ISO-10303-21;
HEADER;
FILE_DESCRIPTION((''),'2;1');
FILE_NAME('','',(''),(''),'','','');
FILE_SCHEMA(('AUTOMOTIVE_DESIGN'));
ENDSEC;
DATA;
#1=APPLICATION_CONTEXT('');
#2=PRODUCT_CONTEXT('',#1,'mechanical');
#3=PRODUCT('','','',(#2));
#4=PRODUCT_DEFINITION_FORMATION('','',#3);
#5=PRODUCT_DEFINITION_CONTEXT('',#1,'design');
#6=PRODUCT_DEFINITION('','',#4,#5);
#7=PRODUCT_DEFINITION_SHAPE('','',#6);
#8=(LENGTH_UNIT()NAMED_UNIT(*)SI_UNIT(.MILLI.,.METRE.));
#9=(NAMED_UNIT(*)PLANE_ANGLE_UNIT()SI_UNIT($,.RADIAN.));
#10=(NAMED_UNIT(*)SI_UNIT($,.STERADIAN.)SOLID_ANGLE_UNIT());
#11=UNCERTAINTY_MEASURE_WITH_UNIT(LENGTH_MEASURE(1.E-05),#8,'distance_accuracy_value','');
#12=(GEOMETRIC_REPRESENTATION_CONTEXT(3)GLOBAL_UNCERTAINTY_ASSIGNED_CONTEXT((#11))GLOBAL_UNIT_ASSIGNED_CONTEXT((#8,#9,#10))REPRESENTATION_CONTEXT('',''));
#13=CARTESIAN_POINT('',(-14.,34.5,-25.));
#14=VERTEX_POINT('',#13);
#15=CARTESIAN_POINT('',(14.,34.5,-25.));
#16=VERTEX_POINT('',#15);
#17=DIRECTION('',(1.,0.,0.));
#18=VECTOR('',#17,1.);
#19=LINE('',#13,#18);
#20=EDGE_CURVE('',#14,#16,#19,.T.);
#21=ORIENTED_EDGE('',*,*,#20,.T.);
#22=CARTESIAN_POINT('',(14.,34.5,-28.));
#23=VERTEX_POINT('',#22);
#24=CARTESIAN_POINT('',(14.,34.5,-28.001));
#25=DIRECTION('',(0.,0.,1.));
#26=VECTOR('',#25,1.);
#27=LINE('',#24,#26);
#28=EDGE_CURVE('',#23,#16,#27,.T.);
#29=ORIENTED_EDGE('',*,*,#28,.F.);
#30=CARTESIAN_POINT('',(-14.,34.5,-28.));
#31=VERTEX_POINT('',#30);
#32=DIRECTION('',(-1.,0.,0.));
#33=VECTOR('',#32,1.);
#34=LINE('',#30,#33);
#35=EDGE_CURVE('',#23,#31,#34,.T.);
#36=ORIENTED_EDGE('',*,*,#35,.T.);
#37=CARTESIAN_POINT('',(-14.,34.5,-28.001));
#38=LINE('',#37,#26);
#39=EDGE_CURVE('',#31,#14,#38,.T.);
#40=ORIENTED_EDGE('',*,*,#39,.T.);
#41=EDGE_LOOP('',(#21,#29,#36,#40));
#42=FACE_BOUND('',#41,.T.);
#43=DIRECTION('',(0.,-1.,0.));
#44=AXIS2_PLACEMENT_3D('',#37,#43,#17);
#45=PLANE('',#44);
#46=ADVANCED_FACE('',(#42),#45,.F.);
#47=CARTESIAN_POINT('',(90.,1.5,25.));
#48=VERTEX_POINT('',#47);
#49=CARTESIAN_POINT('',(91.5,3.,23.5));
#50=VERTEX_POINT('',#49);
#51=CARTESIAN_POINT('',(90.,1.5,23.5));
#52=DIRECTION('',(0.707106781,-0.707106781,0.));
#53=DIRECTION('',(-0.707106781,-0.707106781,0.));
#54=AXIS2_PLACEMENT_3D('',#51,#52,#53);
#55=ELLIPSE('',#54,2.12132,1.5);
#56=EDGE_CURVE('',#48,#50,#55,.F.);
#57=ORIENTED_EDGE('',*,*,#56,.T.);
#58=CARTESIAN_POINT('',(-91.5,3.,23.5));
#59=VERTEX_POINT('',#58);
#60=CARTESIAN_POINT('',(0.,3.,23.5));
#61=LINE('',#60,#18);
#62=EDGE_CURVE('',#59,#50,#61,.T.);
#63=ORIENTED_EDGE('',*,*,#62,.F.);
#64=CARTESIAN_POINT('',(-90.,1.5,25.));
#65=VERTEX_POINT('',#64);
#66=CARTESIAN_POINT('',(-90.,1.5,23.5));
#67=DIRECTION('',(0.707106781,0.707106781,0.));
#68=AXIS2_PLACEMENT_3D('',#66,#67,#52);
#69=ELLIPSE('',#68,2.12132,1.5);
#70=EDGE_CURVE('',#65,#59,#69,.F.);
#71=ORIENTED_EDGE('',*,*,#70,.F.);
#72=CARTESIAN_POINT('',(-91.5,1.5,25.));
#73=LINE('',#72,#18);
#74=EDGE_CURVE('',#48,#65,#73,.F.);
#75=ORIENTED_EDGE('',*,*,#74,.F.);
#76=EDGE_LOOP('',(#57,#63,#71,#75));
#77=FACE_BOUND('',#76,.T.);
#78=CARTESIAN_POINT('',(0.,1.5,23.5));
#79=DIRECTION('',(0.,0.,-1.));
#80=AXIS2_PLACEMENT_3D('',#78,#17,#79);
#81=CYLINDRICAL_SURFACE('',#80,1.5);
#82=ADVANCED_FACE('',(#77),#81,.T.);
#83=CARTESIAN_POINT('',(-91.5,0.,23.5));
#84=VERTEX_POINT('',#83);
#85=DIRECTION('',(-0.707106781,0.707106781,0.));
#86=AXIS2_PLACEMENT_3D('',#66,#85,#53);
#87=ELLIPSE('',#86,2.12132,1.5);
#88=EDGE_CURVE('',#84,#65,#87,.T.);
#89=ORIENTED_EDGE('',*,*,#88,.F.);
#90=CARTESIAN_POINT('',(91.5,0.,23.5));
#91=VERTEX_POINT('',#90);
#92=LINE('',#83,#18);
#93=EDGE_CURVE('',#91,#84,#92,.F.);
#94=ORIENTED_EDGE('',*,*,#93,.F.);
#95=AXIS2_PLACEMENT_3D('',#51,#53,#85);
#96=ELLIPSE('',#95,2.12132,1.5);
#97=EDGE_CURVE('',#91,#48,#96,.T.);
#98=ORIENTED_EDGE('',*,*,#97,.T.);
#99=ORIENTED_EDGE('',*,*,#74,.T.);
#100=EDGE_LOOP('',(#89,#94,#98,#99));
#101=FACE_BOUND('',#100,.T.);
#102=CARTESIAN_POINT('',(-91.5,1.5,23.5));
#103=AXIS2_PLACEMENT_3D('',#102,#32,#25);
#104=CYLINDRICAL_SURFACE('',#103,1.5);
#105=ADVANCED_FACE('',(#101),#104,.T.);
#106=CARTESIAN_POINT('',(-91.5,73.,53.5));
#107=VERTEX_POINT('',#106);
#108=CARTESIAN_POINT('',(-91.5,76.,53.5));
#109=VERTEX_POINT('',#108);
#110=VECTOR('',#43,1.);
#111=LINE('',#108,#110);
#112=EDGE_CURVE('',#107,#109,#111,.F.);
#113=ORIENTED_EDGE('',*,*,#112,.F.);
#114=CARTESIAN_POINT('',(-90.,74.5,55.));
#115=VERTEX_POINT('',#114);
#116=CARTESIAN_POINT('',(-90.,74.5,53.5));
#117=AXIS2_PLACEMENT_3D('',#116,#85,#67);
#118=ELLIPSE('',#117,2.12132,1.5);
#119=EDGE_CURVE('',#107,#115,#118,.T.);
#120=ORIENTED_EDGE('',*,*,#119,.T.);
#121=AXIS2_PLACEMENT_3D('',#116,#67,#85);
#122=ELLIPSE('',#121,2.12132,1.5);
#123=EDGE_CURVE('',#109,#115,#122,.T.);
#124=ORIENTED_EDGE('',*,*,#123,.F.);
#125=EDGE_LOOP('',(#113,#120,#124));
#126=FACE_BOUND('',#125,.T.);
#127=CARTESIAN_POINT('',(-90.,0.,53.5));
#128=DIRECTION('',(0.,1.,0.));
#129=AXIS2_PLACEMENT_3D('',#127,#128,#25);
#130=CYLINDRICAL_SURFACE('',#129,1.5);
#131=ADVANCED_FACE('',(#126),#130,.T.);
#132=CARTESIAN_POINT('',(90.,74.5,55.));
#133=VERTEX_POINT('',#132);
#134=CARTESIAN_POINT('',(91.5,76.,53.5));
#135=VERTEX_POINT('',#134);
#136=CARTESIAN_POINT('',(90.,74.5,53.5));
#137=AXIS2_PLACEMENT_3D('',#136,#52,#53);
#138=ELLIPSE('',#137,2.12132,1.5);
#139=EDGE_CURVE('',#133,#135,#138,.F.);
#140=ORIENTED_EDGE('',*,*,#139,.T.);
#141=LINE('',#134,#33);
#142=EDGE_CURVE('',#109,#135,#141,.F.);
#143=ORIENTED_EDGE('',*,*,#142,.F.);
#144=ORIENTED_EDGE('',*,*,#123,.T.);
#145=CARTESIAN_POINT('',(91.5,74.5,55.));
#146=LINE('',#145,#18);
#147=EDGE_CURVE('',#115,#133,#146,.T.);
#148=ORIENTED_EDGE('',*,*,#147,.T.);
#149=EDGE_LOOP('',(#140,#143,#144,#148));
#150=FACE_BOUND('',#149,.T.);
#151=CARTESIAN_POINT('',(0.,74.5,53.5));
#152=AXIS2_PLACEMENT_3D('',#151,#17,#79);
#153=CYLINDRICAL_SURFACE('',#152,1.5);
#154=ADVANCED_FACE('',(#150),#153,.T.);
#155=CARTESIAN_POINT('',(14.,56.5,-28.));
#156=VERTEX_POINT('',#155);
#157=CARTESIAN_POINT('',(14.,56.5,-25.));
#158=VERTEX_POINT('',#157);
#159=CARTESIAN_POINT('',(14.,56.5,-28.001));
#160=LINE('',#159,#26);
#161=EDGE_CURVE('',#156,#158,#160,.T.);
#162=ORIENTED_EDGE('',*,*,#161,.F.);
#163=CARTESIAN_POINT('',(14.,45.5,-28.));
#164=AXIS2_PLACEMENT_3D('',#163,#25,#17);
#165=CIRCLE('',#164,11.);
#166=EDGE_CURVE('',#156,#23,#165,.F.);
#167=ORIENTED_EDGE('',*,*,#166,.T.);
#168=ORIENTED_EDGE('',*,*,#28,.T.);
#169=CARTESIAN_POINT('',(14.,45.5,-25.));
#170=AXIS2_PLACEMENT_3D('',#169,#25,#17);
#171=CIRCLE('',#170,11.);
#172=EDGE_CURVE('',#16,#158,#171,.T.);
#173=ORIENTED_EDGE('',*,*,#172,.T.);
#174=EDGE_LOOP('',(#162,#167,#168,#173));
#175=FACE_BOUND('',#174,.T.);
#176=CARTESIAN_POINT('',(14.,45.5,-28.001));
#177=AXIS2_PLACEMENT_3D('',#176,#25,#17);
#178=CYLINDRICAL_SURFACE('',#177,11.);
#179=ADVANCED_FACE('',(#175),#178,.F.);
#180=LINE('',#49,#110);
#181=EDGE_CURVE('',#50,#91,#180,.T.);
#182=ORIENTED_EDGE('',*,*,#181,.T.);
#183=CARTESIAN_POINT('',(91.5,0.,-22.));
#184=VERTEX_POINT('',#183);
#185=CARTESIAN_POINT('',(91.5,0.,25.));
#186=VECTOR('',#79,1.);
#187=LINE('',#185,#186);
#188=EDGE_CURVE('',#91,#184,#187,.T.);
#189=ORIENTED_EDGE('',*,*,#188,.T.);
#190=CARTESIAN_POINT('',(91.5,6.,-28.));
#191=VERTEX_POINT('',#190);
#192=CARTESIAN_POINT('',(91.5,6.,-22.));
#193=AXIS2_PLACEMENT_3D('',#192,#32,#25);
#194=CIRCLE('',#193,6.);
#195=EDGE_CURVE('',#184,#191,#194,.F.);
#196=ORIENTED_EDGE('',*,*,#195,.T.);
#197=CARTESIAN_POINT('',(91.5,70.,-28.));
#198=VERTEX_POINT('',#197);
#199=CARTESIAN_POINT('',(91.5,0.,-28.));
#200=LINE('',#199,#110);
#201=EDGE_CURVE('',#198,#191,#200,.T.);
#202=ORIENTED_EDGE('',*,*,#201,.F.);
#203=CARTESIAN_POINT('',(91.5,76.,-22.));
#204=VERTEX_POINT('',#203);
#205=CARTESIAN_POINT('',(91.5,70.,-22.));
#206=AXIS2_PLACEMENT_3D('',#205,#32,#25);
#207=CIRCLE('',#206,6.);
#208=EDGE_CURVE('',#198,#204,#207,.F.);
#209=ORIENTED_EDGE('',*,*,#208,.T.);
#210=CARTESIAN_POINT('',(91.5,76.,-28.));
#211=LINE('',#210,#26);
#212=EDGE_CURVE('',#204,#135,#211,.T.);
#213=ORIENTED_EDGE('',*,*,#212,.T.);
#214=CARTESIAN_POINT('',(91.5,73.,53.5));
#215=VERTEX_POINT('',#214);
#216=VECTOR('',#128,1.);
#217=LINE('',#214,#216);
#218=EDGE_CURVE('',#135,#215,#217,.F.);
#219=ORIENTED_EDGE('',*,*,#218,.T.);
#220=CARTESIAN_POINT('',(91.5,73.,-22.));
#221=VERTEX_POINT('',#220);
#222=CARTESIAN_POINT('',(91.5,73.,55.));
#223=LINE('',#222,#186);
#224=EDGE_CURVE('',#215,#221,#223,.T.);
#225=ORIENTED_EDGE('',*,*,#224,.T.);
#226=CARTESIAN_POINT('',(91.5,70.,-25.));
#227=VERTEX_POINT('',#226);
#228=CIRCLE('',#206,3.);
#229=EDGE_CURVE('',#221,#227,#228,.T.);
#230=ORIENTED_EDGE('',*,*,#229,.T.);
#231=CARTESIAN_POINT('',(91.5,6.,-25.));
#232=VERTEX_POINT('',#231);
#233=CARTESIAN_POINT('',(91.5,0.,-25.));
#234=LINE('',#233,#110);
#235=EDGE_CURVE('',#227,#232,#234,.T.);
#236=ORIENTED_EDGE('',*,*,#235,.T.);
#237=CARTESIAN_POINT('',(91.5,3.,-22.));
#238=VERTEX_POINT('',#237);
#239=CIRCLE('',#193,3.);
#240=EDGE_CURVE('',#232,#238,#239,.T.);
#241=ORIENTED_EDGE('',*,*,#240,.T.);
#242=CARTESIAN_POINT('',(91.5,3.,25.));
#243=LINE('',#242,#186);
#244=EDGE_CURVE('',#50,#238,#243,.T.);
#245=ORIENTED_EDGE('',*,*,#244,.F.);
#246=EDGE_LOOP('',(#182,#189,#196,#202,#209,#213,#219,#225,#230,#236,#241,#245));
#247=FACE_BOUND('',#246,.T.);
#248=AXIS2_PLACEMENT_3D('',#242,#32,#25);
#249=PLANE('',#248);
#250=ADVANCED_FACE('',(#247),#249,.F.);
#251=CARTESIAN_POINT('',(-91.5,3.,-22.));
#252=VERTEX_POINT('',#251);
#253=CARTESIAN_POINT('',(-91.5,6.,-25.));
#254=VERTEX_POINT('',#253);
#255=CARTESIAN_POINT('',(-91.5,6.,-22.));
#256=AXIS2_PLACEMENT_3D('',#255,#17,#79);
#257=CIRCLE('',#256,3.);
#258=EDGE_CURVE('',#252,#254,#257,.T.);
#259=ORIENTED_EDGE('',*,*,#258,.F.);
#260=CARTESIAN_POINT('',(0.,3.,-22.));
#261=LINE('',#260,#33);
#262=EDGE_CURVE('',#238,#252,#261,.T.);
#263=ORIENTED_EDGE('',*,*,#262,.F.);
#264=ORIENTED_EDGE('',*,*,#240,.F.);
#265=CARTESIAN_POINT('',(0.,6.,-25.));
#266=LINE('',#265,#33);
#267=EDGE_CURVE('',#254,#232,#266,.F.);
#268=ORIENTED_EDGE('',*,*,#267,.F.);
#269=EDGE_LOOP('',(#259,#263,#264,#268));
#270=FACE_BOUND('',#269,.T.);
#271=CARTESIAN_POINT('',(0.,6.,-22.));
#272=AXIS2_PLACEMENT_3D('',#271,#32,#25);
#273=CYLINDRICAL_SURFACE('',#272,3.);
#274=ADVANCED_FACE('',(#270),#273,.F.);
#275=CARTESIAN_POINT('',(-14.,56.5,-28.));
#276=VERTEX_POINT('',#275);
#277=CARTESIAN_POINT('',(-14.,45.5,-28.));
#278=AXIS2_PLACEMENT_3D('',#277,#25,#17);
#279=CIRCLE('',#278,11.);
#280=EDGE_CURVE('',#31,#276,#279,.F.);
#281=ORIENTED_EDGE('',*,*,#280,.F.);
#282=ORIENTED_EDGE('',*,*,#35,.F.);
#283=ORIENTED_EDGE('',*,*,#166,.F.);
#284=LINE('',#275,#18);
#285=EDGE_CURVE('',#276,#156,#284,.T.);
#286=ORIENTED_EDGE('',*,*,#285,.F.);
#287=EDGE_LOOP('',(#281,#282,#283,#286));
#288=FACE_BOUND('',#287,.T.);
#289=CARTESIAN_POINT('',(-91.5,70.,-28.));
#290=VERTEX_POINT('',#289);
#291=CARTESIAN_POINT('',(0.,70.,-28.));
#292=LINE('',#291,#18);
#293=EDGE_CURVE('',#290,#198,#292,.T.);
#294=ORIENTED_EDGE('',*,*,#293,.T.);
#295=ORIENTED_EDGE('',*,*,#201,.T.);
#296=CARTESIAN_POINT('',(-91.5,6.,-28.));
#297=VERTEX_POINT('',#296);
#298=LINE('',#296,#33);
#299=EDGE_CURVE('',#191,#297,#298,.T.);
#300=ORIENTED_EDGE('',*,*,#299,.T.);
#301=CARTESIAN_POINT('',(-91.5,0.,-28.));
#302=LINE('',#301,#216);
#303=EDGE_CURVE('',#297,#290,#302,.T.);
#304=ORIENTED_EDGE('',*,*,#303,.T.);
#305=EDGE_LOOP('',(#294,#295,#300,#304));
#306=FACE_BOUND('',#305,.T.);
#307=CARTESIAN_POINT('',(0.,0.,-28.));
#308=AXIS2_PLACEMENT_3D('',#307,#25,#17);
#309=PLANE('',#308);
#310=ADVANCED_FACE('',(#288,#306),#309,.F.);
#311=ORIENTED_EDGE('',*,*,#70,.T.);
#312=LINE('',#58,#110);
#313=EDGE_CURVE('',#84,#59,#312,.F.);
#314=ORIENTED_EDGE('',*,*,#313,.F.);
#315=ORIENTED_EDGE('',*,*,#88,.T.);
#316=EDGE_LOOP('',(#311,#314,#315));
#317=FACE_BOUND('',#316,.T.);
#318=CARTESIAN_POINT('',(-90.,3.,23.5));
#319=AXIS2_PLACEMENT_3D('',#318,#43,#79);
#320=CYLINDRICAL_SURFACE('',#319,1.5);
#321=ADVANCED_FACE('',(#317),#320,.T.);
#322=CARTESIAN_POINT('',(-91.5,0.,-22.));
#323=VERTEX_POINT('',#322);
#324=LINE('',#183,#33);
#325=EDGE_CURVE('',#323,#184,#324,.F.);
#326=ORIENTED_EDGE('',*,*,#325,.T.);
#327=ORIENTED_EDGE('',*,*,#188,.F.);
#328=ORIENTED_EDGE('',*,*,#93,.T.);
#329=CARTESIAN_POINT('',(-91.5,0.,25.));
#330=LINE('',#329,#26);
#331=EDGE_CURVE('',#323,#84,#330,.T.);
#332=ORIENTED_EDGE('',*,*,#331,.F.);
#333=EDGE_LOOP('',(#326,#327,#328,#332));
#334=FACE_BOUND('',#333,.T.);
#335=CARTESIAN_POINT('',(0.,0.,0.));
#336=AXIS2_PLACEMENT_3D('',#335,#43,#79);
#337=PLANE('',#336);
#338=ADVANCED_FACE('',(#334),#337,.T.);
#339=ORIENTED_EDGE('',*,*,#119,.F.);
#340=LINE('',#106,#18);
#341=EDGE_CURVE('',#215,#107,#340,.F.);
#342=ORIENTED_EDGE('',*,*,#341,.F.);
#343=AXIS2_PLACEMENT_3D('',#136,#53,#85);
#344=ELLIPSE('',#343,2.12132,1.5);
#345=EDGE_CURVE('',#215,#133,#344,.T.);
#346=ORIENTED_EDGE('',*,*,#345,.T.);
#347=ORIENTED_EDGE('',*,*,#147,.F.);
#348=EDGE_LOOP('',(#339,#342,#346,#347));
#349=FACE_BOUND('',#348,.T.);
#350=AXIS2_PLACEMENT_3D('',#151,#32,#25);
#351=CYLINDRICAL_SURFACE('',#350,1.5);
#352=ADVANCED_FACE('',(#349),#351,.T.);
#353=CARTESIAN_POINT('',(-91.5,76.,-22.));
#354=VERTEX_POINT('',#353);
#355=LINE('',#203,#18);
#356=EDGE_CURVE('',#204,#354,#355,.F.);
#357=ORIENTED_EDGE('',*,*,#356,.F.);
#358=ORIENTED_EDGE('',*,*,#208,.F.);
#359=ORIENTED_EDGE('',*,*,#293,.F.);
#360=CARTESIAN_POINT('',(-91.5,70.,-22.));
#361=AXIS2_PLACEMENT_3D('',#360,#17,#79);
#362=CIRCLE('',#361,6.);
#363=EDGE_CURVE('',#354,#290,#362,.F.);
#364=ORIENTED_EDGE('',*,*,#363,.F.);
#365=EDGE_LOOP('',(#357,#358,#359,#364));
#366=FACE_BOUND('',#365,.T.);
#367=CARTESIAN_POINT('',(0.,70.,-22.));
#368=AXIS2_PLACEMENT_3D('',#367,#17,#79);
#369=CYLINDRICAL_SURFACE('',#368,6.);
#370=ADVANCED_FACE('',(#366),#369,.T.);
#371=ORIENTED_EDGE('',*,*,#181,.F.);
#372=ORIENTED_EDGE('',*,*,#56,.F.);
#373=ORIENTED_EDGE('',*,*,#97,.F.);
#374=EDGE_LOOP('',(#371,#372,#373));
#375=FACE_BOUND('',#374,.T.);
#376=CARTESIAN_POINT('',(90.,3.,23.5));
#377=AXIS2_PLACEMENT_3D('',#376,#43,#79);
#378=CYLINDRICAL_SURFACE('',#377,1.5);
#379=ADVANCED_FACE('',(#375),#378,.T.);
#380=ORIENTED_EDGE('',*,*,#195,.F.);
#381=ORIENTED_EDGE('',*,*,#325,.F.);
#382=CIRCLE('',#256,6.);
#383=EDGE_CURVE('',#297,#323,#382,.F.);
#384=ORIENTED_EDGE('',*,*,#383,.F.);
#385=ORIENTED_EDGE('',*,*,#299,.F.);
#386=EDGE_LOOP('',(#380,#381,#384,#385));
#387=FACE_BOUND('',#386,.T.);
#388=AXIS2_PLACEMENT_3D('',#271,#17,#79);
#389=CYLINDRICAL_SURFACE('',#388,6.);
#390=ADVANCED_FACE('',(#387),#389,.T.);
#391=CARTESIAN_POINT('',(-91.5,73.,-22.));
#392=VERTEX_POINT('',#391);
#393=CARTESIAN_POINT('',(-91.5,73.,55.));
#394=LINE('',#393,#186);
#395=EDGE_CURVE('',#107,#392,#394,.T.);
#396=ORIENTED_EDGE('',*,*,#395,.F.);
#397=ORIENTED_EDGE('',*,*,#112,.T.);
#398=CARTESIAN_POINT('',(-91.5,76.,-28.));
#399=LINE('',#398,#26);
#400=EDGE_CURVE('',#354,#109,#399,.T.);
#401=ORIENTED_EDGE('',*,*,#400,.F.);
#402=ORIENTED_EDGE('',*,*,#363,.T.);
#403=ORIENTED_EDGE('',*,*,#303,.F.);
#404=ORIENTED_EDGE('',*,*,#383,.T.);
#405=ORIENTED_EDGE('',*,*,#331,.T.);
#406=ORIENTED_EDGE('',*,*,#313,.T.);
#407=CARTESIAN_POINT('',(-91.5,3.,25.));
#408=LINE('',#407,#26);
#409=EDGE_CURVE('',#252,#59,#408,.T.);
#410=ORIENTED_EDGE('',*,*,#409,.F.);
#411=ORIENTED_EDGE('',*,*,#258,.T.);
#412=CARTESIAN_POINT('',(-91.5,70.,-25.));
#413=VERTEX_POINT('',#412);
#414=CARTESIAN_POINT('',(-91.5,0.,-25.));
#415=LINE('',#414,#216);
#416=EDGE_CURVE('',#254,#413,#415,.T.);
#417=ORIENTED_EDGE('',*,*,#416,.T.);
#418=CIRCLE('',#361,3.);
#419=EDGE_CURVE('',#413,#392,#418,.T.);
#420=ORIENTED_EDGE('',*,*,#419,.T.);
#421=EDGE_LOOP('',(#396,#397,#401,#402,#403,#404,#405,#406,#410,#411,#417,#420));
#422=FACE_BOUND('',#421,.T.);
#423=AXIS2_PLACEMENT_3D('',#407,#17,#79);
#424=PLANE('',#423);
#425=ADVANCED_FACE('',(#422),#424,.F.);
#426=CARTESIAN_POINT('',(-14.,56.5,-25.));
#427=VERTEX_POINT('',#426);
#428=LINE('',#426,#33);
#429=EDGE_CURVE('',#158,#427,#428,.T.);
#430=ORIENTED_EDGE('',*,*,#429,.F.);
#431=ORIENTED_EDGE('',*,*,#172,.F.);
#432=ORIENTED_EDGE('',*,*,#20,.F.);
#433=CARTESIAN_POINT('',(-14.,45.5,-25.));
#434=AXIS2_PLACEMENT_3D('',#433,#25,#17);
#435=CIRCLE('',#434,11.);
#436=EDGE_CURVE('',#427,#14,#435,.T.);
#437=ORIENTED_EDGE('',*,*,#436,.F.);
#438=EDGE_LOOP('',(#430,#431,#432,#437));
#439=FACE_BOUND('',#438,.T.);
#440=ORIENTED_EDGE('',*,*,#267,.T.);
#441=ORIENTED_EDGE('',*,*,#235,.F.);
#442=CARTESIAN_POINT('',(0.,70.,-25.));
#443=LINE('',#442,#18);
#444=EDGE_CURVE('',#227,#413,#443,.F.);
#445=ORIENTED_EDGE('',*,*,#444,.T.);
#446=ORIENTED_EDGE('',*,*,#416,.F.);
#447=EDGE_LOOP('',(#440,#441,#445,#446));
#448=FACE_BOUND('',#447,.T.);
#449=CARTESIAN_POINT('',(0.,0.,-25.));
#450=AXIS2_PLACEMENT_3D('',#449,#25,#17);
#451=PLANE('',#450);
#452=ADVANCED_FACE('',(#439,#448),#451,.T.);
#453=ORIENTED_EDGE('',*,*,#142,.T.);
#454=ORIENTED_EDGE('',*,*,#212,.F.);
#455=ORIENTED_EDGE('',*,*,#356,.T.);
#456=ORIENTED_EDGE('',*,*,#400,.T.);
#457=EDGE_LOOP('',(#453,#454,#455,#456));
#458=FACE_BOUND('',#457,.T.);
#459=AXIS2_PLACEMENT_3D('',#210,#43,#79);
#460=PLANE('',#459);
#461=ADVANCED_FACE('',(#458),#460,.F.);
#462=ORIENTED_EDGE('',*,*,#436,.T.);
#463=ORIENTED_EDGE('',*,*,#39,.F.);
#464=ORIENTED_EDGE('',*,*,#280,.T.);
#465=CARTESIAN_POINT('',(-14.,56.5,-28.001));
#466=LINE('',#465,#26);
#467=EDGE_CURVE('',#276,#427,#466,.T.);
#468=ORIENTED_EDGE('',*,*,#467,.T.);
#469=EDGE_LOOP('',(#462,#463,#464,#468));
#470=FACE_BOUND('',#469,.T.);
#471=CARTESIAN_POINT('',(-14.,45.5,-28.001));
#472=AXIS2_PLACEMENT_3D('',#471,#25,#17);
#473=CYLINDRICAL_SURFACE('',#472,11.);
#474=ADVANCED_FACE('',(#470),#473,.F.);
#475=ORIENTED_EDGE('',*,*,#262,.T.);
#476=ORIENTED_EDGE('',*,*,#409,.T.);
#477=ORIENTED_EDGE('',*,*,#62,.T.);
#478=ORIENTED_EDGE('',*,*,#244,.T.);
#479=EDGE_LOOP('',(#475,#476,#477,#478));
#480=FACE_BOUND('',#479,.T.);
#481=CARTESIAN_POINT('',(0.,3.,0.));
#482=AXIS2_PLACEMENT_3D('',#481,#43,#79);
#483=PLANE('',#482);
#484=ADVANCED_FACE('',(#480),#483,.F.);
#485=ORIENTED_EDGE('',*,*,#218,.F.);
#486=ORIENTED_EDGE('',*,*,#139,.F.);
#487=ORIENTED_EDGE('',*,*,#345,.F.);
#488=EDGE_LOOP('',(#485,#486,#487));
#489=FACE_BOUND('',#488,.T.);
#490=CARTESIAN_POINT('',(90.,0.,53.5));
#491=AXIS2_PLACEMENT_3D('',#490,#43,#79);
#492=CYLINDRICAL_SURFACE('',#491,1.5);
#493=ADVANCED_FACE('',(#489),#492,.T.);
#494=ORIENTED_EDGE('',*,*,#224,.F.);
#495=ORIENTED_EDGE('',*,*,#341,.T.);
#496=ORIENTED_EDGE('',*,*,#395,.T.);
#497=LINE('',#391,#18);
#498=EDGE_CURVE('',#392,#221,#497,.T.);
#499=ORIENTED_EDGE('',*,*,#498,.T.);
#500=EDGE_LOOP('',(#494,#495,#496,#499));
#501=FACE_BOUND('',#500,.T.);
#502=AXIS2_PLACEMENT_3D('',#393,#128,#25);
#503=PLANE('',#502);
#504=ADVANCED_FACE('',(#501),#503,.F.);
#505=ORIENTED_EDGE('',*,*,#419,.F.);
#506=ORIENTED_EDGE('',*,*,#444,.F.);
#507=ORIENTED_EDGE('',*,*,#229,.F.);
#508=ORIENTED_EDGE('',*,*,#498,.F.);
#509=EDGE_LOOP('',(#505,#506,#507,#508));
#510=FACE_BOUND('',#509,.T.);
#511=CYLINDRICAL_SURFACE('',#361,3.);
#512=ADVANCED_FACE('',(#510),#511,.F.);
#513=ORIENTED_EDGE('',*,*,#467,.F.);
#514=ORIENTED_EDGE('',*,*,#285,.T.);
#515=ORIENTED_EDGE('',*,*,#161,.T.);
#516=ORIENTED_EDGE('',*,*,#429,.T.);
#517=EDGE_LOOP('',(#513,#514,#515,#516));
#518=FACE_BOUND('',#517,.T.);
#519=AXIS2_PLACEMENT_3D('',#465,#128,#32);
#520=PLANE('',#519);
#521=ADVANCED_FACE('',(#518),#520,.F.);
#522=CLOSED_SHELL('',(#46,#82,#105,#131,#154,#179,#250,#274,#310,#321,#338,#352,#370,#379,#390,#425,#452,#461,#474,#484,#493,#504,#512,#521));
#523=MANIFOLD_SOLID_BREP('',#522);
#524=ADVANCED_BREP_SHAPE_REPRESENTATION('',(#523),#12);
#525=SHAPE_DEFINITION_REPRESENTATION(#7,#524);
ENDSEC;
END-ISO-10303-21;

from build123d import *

# Parameters (mm, degrees)
SKETCH1_W           = 183
SKETCH1_H           = 50
BOSS_EXTRUDE1_DEPTH = 3
SKETCH2_W           = 183
SKETCH2_H           = 76
BOSS_EXTRUDE2_DEPTH = 3
SKETCH3_W           = 183
SKETCH3_H           = 3
BOSS_EXTRUDE3_DEPTH = 80
FILLET2_R           = 1.5
CUT_EXTRUDE1_REACH  = 145.347
FILLET3_R           = 3
FILLET4_R           = 6


with BuildPart() as part:
    # Sketch1 → Boss-Extrude1 (new body)
    with BuildSketch(Plane(origin=(0, 0, 0), x_dir=(1, 0, 0), z_dir=(0, 1, 0))):
        Rectangle(SKETCH1_W, SKETCH1_H)
    extrude(amount=BOSS_EXTRUDE1_DEPTH)

    # Sketch2 → Boss-Extrude2 (add)
    with BuildSketch(Plane(origin=(0, 0, -25), x_dir=(-1, 0, 0), z_dir=(0, 0, -1))):
        with Locations((0, 38)):
            Rectangle(SKETCH2_W, SKETCH2_H)
    extrude(amount=BOSS_EXTRUDE2_DEPTH)

    # Sketch3 → Boss-Extrude3 (add)
    with BuildSketch(Plane.XY.offset(-25)):
        with Locations((0, 74.5)):
            Rectangle(SKETCH3_W, SKETCH3_H)
    extrude(amount=BOSS_EXTRUDE3_DEPTH)

    # Fillet2
    fillet2_edges = [part.edges().sort_by_distance(p)[0] for p in [
        (0, 3, 25),
        (-91.5, 74.5, 55),
        (0, 73, 55),
        (91.5, 74.5, 55),
        (0, 76, 55),
        (0, 0, 25),
        (91.5, 1.5, 25),
        (-91.5, 1.5, 25),
    ]]
    fillet(fillet2_edges, radius=FILLET2_R - 0.0001)  # a hair under: the kernel refuses the full size

    # Sketch4 → Cut-Extrude1 (cut, up to next)
    with BuildSketch(Plane.XY.offset(-25), mode=Mode.PRIVATE) as cut_extrude1_sk1:
        with BuildLine():
            Line((-14, 56.5), (14, 56.5))
            ThreePointArc((14, 56.5), (25, 45.5), (14, 34.5))
            Line((14, 34.5), (-14, 34.5))
            ThreePointArc((-14, 34.5), (-25, 45.5), (-14, 56.5))
        make_face()
    cut_extrude1_tool1 = extrude(cut_extrude1_sk1.sketch, amount=-CUT_EXTRUDE1_REACH, mode=Mode.PRIVATE) & part.part
    add(cut_extrude1_tool1.solids().sort_by_distance((0, 45.5, -25))[0], mode=Mode.SUBTRACT)

    # Fillet3
    fillet3_edges = [part.edges().sort_by_distance(p)[0] for p in [
        (0, 73, -25),
        (0, 3, -25),
    ]]
    fillet(fillet3_edges, radius=FILLET3_R)

    # Fillet4
    fillet4_edges = [part.edges().sort_by_distance(p)[0] for p in [
        (0, 0, -28),
        (0, 76, -28),
    ]]
    fillet(fillet4_edges, radius=FILLET4_R)


solid = part.part
